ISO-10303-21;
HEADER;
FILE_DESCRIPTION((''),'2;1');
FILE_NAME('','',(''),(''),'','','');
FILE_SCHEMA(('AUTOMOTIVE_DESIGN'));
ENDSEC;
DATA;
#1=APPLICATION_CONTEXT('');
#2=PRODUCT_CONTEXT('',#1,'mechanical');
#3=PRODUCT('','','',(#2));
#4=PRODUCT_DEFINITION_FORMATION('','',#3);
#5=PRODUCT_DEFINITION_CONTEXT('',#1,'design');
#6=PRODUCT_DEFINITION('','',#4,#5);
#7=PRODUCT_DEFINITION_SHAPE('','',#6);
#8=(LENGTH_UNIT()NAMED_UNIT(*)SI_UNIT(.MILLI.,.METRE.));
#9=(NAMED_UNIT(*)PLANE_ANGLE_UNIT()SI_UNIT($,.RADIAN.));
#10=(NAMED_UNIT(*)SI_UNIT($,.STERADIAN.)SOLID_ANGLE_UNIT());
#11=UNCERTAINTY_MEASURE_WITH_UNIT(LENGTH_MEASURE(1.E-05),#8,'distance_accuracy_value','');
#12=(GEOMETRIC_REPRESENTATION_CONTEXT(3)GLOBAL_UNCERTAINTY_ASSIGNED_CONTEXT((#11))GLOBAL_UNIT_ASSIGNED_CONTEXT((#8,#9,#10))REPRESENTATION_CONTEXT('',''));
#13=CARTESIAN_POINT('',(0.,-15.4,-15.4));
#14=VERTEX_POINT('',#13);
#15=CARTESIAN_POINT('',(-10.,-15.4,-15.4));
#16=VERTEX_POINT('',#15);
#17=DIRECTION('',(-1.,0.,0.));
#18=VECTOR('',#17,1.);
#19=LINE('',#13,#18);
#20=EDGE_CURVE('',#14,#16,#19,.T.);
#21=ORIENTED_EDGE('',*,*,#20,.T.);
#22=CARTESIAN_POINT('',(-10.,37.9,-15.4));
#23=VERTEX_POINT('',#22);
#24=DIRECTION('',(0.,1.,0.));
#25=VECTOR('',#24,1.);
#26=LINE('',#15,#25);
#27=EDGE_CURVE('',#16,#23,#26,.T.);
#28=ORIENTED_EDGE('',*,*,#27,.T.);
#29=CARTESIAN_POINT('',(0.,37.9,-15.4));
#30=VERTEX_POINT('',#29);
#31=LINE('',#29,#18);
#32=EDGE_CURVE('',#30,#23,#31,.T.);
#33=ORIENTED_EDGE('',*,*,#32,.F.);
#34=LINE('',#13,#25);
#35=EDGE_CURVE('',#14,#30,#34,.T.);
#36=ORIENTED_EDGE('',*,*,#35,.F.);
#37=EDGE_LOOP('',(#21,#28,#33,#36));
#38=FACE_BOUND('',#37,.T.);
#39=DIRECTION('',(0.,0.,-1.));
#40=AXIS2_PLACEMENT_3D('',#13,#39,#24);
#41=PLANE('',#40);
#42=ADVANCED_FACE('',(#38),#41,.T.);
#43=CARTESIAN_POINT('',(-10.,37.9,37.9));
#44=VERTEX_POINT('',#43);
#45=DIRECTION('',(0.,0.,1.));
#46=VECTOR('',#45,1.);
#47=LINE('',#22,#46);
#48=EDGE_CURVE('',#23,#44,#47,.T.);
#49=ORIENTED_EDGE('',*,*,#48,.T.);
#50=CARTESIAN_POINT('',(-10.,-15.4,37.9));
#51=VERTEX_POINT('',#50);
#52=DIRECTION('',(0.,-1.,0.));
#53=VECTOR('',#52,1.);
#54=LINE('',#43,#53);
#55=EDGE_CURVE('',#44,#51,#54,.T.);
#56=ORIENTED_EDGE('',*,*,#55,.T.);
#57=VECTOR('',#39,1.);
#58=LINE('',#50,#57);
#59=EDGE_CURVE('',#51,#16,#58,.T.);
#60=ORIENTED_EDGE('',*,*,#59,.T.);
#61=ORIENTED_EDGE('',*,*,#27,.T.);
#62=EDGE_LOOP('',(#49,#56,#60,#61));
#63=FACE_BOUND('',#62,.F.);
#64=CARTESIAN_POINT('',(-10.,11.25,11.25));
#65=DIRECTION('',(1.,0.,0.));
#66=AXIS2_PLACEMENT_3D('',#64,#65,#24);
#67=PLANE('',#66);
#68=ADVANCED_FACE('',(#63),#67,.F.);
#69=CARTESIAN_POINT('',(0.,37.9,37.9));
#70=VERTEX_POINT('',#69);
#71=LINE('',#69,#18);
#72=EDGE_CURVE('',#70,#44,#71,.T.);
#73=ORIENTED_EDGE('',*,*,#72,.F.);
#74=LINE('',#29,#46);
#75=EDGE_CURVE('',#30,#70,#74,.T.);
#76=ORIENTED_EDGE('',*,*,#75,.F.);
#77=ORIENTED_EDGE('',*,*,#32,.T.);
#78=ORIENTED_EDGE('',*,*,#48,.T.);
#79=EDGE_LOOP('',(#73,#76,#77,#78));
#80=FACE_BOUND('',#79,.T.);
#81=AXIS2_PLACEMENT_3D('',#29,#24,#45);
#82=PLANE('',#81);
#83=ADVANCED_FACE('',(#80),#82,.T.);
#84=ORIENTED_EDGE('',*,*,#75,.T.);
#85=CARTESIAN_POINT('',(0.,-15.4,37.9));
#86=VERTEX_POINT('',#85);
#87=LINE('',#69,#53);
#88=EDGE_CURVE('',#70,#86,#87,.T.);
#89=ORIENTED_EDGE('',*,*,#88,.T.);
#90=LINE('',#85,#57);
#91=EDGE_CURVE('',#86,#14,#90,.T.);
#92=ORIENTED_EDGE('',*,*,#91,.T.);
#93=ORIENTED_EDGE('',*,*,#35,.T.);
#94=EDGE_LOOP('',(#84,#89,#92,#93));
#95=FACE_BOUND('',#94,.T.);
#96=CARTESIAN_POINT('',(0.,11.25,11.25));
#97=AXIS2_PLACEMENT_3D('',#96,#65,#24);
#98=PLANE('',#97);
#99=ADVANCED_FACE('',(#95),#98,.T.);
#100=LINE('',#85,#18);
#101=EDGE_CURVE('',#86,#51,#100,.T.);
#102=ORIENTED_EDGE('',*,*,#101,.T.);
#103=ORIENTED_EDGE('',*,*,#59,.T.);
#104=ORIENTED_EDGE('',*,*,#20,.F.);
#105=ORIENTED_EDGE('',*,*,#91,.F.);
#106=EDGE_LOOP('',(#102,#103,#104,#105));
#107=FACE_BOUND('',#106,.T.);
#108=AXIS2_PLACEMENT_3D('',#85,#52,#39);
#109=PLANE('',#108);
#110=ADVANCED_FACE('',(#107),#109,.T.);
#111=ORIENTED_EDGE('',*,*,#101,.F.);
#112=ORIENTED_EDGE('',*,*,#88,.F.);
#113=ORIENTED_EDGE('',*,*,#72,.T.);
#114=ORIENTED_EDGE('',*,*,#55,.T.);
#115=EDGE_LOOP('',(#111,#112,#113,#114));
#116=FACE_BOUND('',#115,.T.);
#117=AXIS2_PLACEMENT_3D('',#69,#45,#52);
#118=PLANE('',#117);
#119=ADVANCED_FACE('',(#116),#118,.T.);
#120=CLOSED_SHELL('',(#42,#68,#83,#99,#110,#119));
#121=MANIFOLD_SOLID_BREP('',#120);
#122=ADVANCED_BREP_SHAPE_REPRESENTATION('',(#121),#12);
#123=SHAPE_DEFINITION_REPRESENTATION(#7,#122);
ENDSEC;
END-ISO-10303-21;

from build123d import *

# Parameters (mm, degrees)
F1_DEPTH = 10


# Not quite as in the source:
# - a feature names something its author has since deleted; it is built from what else it names


with BuildPart() as f1:
    # F0 (on Right) → F1 (new body)
    with BuildSketch(Plane.YZ):
        Polygon((22.5, 37.9), (0, 37.9), (-15.4, 37.9), (-15.4, 15), (-15.4, 7.5), (-15.4, -15.4), (0, -15.4), (22.5, -15.4), (37.9, -15.4), (37.9, 0), (37.9, 22.5), (37.9, 37.9), align=None)
    extrude(amount=-F1_DEPTH)


solid = f1.part
